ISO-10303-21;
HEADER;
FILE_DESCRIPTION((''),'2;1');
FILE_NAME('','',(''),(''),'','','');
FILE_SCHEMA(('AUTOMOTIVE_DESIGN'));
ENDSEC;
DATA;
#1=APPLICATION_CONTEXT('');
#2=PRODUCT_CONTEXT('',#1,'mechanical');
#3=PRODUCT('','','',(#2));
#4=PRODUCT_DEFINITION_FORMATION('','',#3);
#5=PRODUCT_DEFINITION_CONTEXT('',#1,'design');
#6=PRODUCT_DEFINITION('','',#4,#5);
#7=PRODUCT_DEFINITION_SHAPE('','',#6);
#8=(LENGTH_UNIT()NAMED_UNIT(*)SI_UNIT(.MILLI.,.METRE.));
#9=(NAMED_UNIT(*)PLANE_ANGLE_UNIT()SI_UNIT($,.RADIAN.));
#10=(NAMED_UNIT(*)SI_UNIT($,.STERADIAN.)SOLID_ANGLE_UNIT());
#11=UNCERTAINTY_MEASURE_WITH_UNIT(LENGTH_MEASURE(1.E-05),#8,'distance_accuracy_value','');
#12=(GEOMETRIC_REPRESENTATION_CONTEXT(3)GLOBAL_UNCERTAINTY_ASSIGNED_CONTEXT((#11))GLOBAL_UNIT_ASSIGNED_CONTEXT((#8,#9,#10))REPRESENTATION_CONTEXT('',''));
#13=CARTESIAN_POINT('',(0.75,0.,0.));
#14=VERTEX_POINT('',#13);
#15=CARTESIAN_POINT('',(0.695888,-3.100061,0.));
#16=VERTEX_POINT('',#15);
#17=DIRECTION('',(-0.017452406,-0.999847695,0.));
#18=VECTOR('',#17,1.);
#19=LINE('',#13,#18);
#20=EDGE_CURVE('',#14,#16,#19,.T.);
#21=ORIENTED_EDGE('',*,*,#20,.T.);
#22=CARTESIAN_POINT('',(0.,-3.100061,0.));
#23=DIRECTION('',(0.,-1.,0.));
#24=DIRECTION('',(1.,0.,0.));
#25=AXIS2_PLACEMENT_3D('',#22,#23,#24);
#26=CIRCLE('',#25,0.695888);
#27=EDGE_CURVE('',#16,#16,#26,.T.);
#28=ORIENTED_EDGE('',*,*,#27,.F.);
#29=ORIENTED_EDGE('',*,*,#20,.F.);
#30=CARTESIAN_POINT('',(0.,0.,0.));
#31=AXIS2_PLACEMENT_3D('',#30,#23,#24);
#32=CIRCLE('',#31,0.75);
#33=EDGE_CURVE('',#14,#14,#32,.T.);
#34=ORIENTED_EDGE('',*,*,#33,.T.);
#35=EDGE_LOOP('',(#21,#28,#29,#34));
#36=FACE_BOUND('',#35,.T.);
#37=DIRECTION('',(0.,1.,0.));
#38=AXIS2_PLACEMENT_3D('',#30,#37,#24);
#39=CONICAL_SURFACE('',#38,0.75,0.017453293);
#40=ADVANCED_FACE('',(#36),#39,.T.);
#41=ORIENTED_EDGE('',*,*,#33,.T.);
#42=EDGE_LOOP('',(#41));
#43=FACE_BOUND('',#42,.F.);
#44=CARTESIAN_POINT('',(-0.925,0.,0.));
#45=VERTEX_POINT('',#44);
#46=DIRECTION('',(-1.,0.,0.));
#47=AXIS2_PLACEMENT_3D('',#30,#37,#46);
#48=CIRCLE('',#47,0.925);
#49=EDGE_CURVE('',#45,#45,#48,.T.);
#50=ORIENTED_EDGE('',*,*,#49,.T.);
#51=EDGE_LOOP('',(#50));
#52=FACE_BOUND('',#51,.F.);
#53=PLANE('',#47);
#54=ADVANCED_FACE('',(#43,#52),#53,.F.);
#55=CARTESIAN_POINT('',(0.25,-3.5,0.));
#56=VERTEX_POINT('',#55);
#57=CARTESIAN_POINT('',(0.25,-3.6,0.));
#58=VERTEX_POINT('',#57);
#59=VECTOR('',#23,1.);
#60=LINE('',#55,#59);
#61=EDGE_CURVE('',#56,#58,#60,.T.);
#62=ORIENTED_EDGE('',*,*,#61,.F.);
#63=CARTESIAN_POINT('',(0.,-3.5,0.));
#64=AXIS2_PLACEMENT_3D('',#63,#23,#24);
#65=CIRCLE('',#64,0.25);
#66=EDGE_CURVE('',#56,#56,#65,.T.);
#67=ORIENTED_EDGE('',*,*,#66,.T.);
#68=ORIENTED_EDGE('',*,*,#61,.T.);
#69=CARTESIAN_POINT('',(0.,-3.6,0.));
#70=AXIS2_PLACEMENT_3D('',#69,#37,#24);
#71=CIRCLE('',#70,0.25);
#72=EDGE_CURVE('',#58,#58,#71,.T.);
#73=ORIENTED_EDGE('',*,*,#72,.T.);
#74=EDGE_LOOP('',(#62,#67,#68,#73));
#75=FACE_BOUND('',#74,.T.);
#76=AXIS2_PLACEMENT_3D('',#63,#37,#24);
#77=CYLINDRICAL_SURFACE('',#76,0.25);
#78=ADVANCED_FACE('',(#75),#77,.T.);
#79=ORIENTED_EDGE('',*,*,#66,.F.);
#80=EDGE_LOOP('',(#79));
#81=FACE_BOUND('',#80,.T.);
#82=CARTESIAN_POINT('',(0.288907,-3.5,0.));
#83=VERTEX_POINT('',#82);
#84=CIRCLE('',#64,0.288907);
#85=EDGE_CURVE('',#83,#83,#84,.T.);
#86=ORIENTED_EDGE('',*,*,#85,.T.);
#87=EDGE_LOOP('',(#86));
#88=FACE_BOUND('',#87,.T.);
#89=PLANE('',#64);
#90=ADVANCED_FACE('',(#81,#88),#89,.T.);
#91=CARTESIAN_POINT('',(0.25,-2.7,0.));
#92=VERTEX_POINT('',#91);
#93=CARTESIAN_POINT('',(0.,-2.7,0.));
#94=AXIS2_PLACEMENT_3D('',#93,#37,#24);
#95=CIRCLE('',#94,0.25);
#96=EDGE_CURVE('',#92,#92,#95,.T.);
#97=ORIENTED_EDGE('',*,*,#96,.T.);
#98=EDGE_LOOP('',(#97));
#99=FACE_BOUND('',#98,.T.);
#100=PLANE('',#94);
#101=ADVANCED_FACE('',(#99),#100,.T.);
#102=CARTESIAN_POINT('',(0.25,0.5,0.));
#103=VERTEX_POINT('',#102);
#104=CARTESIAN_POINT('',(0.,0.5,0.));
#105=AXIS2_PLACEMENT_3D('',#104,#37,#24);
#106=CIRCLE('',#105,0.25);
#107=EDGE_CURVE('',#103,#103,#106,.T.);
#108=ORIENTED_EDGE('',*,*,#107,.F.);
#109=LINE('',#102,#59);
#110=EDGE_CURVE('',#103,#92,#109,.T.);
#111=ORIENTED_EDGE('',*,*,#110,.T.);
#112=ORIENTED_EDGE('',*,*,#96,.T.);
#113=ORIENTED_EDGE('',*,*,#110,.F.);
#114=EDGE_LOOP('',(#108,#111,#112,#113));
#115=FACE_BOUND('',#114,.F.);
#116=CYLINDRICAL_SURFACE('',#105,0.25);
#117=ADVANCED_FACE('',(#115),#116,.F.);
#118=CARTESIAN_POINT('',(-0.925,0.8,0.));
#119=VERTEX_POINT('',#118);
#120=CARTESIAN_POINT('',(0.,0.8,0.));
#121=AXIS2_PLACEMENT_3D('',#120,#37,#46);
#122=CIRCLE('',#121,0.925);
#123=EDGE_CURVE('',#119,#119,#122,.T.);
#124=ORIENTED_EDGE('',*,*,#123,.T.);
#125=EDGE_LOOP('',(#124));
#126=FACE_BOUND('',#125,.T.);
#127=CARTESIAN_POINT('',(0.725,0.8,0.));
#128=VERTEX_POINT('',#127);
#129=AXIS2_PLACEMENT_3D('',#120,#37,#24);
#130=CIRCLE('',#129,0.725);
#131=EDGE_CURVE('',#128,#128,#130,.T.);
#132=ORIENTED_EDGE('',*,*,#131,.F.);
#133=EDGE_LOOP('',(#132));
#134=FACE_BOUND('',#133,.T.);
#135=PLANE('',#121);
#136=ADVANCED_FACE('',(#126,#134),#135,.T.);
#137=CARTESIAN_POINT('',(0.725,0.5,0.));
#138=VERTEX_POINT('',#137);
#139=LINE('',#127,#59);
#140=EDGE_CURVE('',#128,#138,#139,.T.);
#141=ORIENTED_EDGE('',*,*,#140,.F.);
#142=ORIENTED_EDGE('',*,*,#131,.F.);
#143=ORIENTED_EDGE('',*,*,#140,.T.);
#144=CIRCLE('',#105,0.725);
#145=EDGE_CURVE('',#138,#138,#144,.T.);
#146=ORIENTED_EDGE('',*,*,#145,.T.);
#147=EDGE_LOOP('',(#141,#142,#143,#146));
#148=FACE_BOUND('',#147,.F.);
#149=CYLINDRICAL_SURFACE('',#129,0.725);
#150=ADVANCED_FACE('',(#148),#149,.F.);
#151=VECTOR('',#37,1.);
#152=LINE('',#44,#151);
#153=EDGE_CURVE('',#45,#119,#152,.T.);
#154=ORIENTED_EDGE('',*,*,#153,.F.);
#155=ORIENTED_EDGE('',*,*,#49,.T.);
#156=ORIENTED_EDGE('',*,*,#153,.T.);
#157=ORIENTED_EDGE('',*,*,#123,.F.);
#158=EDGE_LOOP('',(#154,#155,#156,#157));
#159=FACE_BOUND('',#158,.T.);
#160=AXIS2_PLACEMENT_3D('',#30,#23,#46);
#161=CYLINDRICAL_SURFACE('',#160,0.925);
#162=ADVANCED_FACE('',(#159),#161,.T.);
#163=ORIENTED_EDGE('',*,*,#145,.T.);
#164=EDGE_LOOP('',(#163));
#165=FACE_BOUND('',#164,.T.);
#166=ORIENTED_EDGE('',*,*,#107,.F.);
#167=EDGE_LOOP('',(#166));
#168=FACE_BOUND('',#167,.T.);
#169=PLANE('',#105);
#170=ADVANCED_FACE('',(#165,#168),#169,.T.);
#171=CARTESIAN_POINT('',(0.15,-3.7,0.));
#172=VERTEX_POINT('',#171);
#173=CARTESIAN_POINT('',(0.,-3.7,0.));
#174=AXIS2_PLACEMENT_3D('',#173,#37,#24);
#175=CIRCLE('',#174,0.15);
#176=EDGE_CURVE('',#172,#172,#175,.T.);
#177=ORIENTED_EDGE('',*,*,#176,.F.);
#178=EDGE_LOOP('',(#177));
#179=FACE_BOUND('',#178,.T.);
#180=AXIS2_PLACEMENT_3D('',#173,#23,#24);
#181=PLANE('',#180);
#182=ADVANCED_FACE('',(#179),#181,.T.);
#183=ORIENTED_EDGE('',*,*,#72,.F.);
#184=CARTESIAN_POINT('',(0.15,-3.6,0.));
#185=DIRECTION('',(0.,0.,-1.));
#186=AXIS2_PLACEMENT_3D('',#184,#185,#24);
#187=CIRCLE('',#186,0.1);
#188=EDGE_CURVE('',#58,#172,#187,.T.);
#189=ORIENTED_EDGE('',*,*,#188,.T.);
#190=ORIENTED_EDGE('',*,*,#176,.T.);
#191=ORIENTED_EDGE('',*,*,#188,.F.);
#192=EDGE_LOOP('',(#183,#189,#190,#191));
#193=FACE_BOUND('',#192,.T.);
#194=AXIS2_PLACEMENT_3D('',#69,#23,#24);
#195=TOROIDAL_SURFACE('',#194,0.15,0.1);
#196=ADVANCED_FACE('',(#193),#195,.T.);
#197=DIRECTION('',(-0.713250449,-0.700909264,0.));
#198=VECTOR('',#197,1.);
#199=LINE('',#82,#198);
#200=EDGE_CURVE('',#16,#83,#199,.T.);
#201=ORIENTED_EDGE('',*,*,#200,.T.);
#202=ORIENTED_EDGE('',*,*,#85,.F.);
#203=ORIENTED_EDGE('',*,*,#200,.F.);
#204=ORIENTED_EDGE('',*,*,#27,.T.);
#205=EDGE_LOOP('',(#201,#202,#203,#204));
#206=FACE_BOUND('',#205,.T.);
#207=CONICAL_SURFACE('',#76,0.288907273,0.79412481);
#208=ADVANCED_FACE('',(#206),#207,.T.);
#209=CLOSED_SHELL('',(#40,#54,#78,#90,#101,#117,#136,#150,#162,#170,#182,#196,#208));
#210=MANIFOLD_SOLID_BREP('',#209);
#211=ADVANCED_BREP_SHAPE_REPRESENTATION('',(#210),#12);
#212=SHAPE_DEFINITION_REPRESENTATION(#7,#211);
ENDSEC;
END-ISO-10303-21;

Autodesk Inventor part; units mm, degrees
ref_plane "YZ Plane" through (0, 0, 0) normal (1, 0, 0) x (0, 1, 0)
ref_plane "XZ Plane" through (0, 0, 0) normal (0, 1, 0) x (-1, 0, 0)
ref_plane "XY Plane" through (0, 0, 0) normal (0, 0, 1) x (1, 0, 0)
sketch "Sketch1" plane through (0, 0, 0) normal (0, 1, 0) x (-1, 0, 0)
  circle A0 centre (0, 0) radius 0.925
  dimension "d0" = 1.85
extrude "Extrusion1" add sketch "Sketch1" along normal blind 0.8
sketch "Sketch2" plane through (0, 0, 0) normal (0, -1, 0) x (1, 0, 0)
  circle A0 centre (0, 0) radius 0.75
  dimension "d3" = 1.5
extrude "Extrusion2" add sketch "Sketch2" along normal blind 3.5 draft -1
sketch "Sketch3" plane through (0, -3.5, 0) normal (0, -1, 0) x (1, 0, 0)
  circle A0 centre (0, 0) radius 0.25
  dimension "d6" = 0.5
extrude "Extrusion3" add sketch "Sketch3" along normal blind 3.2
chamfer "Chamfer1" distance 0.4 angle 45 1 edges at (-0.6889, -3.5, 0)
fillet "Fillet1" radius 0.05 1 edges at (-0.25, -6.7, 0)
sketch "Sketch4" plane through (0, 0.8, 0) normal (0, 1, 0) x (1, 0, 0)
  circle A0 centre (0, 0) radius 0.725
  circle A1 centre (0, 0) radius 0.925 projected
  dimension "d13" = 0.2
extrude "Extrusion4" cut sketch "Sketch4" against normal blind 0.3 contours A0
sketch "Sketch5" plane through (0, 0.5, 0) normal (0, 1, 0) x (1, 0, 0)
  circle A0 centre (0, 0) radius 0.25
  dimension "d16" = 0.5
extrude "Extrusion5" cut sketch "Sketch5" against normal blind 3.2
sketch "Sketch6" plane through (0, -6.7, 0) normal (0, -1, 0) x (1, 0, 0)
  circle A0 centre (0, 0) radius 0.3
  dimension "d19" = 0.6
extrude "Extrusion6" cut sketch "Sketch6" against normal blind 3
fillet "Fillet2" radius 0.1 1 edges at (-0.25, -3.7, 0)
properties part number "SIL connector cut"
